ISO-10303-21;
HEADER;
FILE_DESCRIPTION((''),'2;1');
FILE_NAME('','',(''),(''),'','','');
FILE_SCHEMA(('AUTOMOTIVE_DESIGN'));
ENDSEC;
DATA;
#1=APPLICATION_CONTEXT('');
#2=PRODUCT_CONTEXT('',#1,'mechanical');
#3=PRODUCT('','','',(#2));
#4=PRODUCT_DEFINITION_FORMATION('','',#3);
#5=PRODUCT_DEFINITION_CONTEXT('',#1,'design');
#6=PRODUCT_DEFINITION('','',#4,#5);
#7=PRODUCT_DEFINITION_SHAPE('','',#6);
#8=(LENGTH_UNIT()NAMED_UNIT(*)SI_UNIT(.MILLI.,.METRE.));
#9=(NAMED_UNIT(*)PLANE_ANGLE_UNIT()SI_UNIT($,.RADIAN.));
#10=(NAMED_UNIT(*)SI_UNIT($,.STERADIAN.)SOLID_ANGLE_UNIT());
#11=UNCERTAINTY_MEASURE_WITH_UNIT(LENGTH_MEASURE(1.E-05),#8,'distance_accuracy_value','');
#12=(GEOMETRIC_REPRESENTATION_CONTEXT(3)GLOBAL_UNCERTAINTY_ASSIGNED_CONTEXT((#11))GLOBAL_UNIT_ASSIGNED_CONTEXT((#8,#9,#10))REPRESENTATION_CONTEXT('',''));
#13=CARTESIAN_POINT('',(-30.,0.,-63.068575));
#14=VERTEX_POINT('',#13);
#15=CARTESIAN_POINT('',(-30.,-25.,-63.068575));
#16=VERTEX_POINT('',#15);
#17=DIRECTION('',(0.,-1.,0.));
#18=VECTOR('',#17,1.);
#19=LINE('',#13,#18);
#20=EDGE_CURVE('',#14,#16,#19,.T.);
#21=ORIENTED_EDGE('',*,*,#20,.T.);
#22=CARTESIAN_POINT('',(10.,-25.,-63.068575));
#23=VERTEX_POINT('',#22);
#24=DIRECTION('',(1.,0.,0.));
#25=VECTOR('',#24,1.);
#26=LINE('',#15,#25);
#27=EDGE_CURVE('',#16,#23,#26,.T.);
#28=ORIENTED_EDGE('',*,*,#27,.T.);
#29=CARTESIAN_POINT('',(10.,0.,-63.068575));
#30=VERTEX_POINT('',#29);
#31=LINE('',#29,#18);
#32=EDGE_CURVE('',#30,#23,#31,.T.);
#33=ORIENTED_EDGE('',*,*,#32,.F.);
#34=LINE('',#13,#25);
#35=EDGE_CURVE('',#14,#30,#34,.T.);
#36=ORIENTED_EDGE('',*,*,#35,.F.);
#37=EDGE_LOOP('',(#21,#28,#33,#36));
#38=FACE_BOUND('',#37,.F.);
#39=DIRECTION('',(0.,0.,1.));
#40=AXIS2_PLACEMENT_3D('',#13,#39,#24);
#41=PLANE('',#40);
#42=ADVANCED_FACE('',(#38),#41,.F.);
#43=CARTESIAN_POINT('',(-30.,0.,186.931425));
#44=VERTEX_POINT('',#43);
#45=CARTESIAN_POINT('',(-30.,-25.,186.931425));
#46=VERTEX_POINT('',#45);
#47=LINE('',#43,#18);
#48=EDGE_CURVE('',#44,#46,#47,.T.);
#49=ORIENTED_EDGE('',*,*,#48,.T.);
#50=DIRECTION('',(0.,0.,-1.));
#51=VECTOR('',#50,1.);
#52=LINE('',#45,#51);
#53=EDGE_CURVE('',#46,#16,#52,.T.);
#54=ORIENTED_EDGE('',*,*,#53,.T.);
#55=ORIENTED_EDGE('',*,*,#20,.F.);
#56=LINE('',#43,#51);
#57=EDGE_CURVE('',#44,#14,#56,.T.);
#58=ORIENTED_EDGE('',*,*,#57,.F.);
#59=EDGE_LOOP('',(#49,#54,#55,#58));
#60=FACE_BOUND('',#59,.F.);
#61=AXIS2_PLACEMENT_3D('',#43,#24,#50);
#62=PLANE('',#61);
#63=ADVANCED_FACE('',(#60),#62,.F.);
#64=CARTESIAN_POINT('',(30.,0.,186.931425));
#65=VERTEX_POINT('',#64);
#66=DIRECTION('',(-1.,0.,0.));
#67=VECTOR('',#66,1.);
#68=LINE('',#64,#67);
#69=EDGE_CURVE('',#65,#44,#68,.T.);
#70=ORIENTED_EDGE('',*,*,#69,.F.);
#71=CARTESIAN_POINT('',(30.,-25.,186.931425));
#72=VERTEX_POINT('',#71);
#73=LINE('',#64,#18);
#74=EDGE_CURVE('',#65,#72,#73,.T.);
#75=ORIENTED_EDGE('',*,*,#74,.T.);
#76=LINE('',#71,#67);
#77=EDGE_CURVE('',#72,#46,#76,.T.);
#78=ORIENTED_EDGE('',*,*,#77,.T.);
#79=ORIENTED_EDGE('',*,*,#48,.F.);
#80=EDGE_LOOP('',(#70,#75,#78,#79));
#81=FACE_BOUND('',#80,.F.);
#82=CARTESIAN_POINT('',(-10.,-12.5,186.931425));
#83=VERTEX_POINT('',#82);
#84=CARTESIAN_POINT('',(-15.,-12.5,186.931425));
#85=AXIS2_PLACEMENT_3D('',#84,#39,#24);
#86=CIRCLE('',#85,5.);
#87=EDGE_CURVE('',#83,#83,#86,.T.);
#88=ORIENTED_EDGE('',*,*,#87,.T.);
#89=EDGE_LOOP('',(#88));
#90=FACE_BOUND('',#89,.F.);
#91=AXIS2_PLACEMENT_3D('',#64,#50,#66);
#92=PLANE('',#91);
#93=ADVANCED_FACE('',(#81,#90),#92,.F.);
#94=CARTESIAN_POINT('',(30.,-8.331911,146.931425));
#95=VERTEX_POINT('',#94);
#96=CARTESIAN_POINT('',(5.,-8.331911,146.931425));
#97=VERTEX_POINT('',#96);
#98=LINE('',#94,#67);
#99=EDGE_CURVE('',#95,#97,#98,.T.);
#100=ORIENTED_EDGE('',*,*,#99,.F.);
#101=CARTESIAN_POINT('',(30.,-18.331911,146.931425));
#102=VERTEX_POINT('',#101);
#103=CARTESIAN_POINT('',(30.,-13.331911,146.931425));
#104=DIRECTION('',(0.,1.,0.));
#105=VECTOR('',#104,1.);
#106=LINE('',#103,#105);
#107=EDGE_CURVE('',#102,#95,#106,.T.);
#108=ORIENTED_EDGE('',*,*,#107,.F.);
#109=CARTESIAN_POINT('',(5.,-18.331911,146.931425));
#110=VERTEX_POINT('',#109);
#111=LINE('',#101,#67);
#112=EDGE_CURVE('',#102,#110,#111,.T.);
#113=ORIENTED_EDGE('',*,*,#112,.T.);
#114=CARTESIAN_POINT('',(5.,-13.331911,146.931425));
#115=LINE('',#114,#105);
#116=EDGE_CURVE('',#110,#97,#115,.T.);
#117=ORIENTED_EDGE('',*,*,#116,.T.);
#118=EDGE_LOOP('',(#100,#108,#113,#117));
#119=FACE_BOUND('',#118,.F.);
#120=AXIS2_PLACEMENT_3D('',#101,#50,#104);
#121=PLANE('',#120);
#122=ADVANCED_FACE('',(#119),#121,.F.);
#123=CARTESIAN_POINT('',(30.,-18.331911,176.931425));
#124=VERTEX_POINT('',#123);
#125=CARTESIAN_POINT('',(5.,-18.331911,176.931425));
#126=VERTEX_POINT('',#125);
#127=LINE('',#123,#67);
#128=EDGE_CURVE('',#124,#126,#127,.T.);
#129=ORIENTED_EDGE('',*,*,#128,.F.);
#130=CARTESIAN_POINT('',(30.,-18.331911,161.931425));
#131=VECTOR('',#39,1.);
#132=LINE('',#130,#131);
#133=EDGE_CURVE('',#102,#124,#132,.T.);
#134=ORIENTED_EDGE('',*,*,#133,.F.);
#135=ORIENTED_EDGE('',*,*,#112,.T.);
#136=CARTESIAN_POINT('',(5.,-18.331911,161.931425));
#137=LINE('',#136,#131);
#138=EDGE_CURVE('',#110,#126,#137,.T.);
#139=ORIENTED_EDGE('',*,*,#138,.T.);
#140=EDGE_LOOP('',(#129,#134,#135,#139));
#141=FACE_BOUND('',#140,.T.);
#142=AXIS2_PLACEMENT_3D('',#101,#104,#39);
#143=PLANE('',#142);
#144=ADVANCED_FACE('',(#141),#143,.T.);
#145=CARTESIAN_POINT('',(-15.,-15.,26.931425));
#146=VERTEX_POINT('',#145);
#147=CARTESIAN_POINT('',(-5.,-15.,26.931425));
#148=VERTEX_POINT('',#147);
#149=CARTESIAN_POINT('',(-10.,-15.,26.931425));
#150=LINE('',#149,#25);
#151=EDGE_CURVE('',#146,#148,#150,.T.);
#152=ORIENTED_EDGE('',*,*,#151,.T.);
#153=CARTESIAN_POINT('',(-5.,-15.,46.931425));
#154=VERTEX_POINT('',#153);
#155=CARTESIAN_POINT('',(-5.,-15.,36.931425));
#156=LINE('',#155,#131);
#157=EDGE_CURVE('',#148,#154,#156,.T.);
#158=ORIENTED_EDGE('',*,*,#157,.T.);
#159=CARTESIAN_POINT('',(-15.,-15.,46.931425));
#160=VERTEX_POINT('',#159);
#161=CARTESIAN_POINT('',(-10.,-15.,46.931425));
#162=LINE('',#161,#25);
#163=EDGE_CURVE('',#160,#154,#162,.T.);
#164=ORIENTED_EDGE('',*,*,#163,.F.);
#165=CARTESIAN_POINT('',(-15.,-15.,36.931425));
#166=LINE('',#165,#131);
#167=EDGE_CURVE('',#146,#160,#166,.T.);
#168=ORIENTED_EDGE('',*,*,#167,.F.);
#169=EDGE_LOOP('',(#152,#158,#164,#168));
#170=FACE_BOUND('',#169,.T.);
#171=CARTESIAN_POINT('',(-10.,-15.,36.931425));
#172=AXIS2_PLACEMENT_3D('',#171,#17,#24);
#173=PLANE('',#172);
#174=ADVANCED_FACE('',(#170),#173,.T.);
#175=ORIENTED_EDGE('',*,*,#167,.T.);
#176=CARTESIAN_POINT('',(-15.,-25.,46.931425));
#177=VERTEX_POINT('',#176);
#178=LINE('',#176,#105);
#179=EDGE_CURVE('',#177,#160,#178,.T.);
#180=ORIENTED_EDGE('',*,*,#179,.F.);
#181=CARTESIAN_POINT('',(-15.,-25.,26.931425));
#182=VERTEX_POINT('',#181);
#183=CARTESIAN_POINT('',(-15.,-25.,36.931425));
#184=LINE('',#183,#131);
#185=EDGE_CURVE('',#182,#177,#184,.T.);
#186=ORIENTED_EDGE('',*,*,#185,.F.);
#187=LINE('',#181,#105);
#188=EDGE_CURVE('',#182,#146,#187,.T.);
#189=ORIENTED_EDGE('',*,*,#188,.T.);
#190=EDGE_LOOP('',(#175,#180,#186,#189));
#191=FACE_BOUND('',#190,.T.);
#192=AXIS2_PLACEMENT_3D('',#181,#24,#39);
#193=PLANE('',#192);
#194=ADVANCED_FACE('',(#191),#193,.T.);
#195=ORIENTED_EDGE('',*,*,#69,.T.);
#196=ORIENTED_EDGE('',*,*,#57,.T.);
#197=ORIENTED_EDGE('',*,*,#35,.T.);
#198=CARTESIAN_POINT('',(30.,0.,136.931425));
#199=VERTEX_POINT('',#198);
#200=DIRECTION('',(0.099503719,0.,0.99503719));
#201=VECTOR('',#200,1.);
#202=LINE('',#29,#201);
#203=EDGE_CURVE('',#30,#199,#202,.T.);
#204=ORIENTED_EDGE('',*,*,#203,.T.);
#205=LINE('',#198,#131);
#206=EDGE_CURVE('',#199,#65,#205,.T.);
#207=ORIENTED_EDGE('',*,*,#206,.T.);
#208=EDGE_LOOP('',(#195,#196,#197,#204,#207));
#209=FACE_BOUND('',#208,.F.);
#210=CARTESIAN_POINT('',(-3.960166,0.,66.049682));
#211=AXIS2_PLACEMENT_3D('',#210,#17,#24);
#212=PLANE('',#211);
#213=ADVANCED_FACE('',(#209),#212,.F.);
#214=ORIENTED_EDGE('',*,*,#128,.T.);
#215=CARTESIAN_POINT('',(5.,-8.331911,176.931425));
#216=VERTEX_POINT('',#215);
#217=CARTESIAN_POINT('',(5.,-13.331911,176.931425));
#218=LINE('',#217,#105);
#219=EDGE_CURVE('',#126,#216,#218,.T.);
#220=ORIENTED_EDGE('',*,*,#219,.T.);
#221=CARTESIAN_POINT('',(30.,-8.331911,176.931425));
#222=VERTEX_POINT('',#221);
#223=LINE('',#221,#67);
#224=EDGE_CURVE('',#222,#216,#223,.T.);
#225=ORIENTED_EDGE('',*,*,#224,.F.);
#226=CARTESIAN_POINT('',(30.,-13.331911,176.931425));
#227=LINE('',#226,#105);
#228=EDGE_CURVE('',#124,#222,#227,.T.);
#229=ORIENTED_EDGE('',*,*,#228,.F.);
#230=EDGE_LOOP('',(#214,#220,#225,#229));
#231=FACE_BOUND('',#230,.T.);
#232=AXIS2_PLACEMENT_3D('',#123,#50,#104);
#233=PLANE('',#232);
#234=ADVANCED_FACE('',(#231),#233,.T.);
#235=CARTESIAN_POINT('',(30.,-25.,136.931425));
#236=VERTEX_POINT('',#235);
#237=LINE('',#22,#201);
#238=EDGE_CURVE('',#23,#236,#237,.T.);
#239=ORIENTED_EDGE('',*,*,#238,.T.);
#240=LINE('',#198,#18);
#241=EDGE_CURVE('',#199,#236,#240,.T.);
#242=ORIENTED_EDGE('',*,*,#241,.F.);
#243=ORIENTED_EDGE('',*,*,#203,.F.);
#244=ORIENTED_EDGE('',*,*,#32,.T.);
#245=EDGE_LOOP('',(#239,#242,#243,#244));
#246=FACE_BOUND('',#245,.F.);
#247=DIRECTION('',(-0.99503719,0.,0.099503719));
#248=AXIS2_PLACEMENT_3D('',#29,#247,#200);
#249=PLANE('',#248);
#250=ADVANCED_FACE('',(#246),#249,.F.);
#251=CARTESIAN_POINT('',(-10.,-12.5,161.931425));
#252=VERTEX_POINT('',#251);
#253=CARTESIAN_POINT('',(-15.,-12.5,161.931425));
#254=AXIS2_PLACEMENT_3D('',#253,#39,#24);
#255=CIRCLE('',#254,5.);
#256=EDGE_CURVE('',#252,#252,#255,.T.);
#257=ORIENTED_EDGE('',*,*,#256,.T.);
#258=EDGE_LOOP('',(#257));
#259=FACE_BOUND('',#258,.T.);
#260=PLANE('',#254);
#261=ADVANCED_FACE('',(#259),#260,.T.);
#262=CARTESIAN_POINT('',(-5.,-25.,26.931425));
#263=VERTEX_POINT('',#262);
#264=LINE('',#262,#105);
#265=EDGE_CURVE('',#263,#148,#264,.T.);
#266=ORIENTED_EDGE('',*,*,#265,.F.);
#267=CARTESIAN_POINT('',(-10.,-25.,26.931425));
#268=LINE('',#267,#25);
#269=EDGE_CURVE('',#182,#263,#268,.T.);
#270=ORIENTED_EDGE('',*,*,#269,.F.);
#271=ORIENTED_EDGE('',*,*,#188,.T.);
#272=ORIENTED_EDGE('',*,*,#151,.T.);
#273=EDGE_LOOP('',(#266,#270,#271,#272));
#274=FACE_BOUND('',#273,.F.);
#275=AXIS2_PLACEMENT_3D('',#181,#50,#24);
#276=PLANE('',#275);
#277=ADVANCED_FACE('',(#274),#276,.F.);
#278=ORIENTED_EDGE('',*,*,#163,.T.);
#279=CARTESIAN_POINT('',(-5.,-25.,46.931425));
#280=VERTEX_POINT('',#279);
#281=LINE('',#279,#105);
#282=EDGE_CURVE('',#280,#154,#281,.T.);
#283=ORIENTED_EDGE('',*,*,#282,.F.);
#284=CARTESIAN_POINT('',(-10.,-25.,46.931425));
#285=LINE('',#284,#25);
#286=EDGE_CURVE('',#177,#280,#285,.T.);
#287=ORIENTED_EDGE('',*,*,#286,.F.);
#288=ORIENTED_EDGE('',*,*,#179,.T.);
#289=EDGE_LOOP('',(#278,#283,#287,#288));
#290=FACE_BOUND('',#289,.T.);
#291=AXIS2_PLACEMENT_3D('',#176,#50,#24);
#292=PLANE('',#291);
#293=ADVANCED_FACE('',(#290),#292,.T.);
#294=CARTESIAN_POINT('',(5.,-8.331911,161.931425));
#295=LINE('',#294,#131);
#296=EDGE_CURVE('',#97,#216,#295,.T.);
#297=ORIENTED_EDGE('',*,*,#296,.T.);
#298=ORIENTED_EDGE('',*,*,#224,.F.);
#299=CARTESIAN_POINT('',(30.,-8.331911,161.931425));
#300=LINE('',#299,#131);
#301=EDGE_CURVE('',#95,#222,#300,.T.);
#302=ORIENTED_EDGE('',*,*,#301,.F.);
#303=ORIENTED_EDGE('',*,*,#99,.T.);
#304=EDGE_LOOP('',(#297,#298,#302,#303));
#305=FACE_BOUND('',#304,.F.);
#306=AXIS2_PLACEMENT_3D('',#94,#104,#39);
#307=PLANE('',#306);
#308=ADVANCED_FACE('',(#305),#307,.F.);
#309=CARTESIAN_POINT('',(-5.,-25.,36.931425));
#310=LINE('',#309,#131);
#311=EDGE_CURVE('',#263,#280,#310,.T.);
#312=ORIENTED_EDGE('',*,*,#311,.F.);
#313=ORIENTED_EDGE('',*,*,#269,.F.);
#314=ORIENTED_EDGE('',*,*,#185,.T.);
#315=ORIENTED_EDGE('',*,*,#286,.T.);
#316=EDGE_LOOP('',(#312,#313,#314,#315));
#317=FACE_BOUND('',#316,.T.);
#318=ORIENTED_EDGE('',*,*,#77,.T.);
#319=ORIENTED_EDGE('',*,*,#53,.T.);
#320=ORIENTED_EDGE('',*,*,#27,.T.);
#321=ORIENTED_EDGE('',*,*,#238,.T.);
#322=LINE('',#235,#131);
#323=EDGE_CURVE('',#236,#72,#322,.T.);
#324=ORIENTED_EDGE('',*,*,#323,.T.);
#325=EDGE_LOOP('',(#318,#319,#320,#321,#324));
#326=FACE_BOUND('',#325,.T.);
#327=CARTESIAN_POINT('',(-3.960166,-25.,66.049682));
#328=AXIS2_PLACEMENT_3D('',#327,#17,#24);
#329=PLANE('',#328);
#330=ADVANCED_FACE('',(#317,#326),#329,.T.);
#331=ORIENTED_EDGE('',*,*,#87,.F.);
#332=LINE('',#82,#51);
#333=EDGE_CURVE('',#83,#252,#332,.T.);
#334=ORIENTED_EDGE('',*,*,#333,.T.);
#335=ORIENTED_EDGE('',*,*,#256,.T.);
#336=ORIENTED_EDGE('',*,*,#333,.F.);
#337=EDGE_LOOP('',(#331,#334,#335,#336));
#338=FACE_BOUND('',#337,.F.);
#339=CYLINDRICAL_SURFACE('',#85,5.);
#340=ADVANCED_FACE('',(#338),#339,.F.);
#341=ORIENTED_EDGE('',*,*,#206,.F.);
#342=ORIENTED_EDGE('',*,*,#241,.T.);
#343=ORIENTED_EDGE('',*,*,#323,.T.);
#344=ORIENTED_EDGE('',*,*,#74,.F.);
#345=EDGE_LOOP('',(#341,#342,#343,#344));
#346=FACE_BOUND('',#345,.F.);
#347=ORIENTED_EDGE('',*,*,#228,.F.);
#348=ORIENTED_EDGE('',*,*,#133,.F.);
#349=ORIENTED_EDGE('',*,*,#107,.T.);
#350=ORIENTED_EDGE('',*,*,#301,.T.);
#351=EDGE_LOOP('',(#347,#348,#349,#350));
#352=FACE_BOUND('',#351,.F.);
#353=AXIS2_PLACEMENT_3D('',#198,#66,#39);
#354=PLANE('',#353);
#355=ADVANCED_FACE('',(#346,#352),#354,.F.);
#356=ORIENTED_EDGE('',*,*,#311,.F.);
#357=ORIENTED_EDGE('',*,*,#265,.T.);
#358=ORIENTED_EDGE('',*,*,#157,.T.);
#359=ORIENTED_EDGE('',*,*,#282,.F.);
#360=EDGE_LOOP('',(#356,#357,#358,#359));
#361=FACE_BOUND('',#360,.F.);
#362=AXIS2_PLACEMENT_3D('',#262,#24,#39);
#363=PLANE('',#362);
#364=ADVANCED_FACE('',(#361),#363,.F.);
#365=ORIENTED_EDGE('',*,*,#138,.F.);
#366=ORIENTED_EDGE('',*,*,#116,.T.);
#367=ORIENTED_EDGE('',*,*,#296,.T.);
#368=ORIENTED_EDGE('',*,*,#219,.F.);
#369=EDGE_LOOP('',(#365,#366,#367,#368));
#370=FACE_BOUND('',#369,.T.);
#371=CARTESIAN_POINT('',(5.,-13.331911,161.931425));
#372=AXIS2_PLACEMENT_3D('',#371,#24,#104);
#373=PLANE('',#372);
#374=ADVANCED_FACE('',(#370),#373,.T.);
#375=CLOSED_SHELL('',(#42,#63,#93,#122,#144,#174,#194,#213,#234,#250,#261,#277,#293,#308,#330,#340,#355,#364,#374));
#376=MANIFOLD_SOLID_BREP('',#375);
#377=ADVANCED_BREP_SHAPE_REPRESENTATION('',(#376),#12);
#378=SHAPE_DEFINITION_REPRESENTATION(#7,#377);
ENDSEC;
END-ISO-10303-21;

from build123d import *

# Parameters (mm, degrees)
F1_DEPTH = 25
F2_W     = 10
F2_H     = 20
F3_DEPTH = 10
F4_W     = 10
F4_H     = 30
F5_DEPTH = 25
F6_R     = 5
F7_DEPTH = 25


# Not quite as in the source:
# - a feature names something its author has since deleted; it is built from what else it names


with BuildPart() as f1:
    # F0 (on Front) → F1 (new body)
    with BuildSketch(Plane.XZ):
        Polygon((30, 186.9314253517), (-30, 186.9314253517), (-30, -63.0685746483), (10, -63.0685746483), (30, 136.9314253517), align=None)
    extrude(amount=F1_DEPTH)

    # F2 (on face) → F3 (cut)
    with BuildSketch(Plane.XZ.offset(25)):
        with Locations((-10, 36.9314253517)):
            Rectangle(F2_W, F2_H)
    extrude(amount=-F3_DEPTH, mode=Mode.SUBTRACT)

    # F4 (on face) → F5 (cut)
    with BuildSketch(Plane.YZ.offset(30)):
        with Locations((-13.3319108949, 161.9314253517)):
            Rectangle(F4_W, F4_H)
    extrude(amount=-F5_DEPTH, mode=Mode.SUBTRACT)

    # F6 (on face) → F7 (cut)
    with BuildSketch(Plane.XY.offset(186.9314253517)):
        with Locations((-15, -12.5)):
            Circle(F6_R)
    extrude(amount=-F7_DEPTH, mode=Mode.SUBTRACT)


solid = f1.part
